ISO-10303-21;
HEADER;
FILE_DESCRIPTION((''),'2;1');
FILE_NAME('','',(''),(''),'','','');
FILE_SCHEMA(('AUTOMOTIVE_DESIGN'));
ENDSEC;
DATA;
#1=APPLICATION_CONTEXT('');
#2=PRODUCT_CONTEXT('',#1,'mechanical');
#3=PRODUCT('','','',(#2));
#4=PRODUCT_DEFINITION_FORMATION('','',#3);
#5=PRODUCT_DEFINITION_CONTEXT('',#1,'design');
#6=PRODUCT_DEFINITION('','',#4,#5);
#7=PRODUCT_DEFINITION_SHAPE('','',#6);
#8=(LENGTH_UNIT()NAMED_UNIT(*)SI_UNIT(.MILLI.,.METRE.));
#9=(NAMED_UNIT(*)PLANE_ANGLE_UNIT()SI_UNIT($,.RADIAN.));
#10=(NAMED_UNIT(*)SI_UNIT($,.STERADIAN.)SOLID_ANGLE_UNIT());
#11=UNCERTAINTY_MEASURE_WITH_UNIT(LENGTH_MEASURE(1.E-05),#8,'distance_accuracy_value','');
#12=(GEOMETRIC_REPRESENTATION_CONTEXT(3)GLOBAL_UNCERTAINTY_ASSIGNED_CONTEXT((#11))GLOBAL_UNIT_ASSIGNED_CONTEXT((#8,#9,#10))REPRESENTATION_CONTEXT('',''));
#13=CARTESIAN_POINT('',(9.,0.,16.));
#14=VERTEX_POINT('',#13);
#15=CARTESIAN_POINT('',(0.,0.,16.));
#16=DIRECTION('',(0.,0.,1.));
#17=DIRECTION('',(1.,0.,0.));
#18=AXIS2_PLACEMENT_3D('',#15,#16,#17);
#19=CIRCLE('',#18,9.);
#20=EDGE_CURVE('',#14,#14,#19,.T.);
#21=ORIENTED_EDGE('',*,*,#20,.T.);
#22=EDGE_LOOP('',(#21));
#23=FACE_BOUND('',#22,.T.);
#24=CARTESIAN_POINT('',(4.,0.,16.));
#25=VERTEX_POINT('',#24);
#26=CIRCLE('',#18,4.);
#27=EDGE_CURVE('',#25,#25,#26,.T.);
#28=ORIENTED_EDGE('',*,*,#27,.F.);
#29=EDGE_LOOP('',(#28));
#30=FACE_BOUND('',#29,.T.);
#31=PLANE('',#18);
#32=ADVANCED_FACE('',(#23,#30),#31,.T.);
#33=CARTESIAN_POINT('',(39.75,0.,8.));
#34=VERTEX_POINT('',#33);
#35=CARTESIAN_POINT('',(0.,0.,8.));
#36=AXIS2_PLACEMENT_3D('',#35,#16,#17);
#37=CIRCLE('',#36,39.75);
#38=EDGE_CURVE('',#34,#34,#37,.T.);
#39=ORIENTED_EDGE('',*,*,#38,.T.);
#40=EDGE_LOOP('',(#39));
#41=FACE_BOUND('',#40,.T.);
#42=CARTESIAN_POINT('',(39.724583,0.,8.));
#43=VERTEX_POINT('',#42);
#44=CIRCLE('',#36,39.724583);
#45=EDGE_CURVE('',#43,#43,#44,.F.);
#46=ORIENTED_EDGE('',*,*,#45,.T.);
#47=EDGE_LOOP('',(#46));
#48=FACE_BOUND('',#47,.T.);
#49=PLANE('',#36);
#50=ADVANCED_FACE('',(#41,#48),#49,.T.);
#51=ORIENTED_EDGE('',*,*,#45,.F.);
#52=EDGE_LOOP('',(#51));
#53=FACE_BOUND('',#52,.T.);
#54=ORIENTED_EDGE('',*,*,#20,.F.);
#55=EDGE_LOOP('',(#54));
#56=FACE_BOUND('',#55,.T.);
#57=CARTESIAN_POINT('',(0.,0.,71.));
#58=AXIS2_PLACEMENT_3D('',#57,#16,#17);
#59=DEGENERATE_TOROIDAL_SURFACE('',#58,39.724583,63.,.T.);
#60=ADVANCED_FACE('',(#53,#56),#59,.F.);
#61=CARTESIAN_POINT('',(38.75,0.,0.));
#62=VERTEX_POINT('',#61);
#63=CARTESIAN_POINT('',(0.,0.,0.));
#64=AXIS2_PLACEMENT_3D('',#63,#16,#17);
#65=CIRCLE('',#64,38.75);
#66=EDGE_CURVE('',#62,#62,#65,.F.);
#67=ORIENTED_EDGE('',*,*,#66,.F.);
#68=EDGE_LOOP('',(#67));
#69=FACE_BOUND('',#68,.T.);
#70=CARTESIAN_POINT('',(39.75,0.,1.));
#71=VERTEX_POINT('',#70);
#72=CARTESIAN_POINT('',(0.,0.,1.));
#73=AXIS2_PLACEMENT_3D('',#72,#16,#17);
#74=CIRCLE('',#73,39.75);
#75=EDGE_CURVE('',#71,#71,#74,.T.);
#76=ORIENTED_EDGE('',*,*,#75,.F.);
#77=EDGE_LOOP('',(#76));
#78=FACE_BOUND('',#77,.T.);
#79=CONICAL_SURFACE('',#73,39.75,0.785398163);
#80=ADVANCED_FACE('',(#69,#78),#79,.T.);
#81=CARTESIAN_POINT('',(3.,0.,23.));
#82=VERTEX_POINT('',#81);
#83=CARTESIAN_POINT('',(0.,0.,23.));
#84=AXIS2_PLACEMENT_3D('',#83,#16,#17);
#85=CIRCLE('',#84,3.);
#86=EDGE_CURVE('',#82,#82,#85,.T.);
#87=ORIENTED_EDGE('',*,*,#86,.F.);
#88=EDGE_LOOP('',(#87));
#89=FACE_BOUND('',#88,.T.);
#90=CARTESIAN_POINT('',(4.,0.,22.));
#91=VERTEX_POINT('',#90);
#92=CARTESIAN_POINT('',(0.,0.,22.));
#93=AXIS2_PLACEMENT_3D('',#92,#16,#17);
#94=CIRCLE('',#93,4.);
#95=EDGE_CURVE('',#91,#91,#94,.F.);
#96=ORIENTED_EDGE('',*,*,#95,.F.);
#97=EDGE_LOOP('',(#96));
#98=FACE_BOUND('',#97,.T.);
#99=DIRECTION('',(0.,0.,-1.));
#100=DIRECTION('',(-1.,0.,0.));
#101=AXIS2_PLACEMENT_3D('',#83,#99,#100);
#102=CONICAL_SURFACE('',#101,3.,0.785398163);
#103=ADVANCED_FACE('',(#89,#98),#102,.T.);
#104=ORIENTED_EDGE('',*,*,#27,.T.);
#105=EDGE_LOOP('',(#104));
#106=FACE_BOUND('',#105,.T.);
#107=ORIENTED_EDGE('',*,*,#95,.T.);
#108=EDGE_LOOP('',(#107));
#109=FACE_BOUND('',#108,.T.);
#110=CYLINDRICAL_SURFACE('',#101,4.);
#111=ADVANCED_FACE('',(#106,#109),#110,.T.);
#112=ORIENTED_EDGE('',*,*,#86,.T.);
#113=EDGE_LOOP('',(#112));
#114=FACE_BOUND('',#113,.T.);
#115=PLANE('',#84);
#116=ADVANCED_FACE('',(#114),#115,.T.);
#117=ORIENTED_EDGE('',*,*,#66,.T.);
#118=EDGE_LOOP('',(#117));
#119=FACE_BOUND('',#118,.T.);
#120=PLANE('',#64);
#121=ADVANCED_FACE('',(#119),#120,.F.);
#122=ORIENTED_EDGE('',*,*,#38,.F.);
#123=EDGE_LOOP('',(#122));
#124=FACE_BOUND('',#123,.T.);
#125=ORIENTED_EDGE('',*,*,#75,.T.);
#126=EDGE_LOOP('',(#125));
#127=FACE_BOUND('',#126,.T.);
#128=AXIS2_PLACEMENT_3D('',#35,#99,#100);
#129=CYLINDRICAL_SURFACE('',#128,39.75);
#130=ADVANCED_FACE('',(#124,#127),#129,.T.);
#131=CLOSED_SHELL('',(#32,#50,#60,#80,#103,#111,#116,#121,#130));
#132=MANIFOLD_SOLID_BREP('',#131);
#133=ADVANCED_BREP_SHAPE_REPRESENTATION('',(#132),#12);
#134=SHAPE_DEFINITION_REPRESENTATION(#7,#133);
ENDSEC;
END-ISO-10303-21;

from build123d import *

# Parameters (mm, degrees)
SKETCH1_R           = 39.75
BOSS_EXTRUDE1_DEPTH = 8
CHAMFER1_SIZE       = 1
SKETCH2_R           = 9
SKETCH2_R_2         = 4
BOSS_EXTRUDE2_DEPTH = 8
BOSS_EXTRUDE3_START = 8
SKETCH2_3_R         = 4
BOSS_EXTRUDE3_DEPTH = 7
FILLET1_R           = 63
CHAMFER2_SIZE       = 1


with BuildPart() as part:
    # Sketch1 → Boss-Extrude1 (new body)
    with BuildSketch(Plane.XY):
        Circle(SKETCH1_R)
    extrude(amount=BOSS_EXTRUDE1_DEPTH)

    # Chamfer1
    chamfer1_edges = [part.edges().sort_by_distance(p)[0] for p in [
        (-39.75, 0, 0),
    ]]
    chamfer(chamfer1_edges, length=CHAMFER1_SIZE)

    # Sketch2 → Boss-Extrude2 (add)
    # profile 1 of 2: a face of its own
    with BuildSketch(Plane.XY.offset(8)):
        Circle(SKETCH2_R)
        Circle(SKETCH2_R_2, mode=Mode.SUBTRACT)
    # profile 2 of 2: a face of its own
    with BuildSketch(Plane.XY.offset(8)):
        Circle(SKETCH2_R_2)
    extrude(amount=BOSS_EXTRUDE2_DEPTH)

    # Sketch2<3> → Boss-Extrude3 (add)
    with BuildSketch(Plane.XY.offset(8).offset(BOSS_EXTRUDE3_START)):
        Circle(SKETCH2_3_R)
    extrude(amount=BOSS_EXTRUDE3_DEPTH)

    # Fillet1
    # the kernel refuses this fillet: 63 mm, written as the material it adds along each edge
    with BuildSketch(Plane(origin=(0, 0, 8), x_dir=(1, 0, 0), z_dir=(0, -1, 0))) as fillet1_piece_1:
        with BuildLine():
            CenterArc((39.724582991, 63), FILLET1_R, 240.811017564, 29.188982436)
            Line((9, 8), (9, 0))
            Line((9, 0), (39.724582991, 0))
        make_face()
    revolve(axis=Axis((0, 0, 8), (0, 0, 1)))

    # Chamfer2
    chamfer2_edges = [part.edges().sort_by_distance(p)[0] for p in [
        (-4, 0, 23),
    ]]
    chamfer(chamfer2_edges, length=CHAMFER2_SIZE)


solid = part.part
